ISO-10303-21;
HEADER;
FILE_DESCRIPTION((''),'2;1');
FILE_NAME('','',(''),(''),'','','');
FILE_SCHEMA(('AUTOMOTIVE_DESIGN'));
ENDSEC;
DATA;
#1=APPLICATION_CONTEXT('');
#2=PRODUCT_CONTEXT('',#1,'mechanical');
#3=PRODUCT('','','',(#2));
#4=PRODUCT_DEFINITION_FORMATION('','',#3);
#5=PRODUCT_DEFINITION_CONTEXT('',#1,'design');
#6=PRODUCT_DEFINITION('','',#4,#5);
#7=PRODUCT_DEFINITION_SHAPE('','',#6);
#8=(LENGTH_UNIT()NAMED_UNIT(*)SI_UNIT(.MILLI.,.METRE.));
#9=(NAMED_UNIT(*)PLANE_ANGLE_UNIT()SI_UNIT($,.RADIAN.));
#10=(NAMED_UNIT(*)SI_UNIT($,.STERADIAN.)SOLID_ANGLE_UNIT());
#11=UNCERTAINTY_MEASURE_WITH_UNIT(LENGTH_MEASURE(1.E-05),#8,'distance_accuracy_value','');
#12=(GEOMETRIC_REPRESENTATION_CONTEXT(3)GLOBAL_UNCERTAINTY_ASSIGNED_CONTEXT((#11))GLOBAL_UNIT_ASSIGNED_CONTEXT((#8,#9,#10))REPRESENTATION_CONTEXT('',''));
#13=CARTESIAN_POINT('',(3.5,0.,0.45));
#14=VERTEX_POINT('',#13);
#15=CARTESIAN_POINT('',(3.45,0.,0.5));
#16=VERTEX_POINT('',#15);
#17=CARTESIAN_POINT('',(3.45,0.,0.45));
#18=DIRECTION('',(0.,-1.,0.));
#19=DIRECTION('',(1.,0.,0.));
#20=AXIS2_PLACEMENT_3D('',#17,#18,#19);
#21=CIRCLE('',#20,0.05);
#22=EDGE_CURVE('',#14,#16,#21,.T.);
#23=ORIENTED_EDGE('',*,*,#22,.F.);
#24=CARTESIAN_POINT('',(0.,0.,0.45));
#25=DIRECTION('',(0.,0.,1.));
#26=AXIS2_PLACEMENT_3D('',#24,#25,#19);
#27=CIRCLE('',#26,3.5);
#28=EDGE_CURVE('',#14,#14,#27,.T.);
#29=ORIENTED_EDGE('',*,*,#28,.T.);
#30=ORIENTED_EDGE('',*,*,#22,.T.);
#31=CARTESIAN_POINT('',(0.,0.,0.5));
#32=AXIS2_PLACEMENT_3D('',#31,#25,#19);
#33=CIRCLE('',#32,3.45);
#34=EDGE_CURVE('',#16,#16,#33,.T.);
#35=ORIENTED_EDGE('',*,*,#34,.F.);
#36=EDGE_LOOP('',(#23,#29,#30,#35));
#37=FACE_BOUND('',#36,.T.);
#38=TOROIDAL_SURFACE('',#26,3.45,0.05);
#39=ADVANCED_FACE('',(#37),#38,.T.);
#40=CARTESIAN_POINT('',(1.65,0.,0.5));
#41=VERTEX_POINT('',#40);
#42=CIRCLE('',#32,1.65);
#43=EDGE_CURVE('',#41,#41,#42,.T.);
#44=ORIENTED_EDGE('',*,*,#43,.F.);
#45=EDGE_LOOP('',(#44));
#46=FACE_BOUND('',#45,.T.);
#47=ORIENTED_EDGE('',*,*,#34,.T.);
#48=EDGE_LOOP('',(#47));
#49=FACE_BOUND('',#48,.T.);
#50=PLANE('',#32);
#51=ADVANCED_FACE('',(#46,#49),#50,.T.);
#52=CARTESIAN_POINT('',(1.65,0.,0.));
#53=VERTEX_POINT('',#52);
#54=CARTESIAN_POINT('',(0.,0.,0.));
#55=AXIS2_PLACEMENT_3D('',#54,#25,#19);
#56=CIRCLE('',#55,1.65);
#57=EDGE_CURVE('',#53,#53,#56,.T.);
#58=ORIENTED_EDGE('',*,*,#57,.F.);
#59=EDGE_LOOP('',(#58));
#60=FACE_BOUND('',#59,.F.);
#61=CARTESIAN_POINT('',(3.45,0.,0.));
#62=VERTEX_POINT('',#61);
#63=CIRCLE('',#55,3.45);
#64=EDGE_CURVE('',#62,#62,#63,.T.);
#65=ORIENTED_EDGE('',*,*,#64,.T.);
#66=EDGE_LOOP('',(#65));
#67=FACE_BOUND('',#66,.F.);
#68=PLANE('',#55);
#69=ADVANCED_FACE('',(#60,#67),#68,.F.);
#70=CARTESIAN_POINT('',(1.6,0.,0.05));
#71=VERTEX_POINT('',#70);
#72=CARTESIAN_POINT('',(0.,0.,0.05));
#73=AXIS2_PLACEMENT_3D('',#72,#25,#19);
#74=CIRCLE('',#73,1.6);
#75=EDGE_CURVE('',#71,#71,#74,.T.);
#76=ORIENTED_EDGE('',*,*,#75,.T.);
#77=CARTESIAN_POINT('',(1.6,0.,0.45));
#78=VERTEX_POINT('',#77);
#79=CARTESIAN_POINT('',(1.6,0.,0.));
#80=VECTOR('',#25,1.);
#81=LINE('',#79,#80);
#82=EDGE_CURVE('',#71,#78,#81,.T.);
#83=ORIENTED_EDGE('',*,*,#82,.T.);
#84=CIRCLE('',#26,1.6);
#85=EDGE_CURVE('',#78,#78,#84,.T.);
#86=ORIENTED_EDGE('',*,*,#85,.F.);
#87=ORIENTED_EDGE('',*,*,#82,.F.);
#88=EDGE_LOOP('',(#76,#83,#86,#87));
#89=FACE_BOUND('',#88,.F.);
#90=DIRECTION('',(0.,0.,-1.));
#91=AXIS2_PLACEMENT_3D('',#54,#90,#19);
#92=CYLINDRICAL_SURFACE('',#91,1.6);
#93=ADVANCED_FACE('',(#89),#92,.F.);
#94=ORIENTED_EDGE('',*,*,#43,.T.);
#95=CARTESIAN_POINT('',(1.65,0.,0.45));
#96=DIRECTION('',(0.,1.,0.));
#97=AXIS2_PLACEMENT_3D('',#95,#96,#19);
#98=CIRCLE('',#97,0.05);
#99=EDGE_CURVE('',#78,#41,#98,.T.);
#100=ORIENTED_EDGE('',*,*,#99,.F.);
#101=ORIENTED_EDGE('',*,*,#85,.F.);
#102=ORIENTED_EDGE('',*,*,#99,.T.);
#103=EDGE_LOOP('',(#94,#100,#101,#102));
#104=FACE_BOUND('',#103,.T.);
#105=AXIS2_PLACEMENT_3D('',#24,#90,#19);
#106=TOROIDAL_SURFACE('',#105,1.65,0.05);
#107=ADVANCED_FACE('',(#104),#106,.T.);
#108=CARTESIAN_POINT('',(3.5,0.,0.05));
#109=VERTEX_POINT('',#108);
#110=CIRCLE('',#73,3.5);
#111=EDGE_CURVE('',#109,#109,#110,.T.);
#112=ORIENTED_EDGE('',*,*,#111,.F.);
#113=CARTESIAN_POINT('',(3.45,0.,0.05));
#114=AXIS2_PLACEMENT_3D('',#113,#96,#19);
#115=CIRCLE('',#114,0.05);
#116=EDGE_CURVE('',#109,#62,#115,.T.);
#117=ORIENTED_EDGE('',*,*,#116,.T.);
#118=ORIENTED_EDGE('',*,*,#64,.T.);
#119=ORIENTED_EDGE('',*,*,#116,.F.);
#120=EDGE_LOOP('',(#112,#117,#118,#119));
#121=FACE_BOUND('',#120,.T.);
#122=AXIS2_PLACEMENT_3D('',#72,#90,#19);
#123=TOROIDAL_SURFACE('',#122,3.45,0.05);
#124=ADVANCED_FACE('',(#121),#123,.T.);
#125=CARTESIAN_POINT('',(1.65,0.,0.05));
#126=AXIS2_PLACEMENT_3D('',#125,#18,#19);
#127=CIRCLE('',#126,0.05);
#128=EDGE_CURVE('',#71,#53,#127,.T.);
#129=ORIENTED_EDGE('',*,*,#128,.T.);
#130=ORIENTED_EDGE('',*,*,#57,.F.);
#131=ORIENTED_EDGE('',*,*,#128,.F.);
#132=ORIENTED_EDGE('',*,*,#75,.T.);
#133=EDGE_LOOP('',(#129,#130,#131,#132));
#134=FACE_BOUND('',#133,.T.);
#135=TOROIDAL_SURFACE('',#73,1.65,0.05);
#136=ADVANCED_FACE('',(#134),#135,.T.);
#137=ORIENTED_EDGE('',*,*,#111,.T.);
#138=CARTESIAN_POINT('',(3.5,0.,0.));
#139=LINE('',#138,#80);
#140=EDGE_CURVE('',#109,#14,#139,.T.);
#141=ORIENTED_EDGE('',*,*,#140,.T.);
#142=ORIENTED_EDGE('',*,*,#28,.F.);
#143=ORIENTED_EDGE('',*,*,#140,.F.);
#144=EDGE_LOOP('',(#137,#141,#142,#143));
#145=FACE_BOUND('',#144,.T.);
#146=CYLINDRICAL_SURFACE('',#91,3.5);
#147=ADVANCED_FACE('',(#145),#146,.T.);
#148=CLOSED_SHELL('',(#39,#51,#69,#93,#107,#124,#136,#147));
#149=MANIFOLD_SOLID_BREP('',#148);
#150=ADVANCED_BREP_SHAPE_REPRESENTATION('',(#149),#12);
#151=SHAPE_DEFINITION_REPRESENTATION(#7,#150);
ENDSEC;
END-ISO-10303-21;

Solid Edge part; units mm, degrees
sketch "Sketch1" plane through (0, 0, 0) normal (0, 0, 1) x (1, 0, 0)
  circle A0 centre (0, 0) radius 1.6
  circle A1 centre (0, 0) radius 3.5
  dimension "D1" = 7
  dimension "D2" = 3.2
extrude "Protrusion1" add sketch "Sketch1" along normal blind 0.5
fillet "Round_Edges" radius 0.05 4 edges at (-3.5, 0, 0.5) (-3.5, 0, 0) (-1.6, 0, 0.5) (-1.6, 0, 0)
properties material "Nylon, general purpose"
